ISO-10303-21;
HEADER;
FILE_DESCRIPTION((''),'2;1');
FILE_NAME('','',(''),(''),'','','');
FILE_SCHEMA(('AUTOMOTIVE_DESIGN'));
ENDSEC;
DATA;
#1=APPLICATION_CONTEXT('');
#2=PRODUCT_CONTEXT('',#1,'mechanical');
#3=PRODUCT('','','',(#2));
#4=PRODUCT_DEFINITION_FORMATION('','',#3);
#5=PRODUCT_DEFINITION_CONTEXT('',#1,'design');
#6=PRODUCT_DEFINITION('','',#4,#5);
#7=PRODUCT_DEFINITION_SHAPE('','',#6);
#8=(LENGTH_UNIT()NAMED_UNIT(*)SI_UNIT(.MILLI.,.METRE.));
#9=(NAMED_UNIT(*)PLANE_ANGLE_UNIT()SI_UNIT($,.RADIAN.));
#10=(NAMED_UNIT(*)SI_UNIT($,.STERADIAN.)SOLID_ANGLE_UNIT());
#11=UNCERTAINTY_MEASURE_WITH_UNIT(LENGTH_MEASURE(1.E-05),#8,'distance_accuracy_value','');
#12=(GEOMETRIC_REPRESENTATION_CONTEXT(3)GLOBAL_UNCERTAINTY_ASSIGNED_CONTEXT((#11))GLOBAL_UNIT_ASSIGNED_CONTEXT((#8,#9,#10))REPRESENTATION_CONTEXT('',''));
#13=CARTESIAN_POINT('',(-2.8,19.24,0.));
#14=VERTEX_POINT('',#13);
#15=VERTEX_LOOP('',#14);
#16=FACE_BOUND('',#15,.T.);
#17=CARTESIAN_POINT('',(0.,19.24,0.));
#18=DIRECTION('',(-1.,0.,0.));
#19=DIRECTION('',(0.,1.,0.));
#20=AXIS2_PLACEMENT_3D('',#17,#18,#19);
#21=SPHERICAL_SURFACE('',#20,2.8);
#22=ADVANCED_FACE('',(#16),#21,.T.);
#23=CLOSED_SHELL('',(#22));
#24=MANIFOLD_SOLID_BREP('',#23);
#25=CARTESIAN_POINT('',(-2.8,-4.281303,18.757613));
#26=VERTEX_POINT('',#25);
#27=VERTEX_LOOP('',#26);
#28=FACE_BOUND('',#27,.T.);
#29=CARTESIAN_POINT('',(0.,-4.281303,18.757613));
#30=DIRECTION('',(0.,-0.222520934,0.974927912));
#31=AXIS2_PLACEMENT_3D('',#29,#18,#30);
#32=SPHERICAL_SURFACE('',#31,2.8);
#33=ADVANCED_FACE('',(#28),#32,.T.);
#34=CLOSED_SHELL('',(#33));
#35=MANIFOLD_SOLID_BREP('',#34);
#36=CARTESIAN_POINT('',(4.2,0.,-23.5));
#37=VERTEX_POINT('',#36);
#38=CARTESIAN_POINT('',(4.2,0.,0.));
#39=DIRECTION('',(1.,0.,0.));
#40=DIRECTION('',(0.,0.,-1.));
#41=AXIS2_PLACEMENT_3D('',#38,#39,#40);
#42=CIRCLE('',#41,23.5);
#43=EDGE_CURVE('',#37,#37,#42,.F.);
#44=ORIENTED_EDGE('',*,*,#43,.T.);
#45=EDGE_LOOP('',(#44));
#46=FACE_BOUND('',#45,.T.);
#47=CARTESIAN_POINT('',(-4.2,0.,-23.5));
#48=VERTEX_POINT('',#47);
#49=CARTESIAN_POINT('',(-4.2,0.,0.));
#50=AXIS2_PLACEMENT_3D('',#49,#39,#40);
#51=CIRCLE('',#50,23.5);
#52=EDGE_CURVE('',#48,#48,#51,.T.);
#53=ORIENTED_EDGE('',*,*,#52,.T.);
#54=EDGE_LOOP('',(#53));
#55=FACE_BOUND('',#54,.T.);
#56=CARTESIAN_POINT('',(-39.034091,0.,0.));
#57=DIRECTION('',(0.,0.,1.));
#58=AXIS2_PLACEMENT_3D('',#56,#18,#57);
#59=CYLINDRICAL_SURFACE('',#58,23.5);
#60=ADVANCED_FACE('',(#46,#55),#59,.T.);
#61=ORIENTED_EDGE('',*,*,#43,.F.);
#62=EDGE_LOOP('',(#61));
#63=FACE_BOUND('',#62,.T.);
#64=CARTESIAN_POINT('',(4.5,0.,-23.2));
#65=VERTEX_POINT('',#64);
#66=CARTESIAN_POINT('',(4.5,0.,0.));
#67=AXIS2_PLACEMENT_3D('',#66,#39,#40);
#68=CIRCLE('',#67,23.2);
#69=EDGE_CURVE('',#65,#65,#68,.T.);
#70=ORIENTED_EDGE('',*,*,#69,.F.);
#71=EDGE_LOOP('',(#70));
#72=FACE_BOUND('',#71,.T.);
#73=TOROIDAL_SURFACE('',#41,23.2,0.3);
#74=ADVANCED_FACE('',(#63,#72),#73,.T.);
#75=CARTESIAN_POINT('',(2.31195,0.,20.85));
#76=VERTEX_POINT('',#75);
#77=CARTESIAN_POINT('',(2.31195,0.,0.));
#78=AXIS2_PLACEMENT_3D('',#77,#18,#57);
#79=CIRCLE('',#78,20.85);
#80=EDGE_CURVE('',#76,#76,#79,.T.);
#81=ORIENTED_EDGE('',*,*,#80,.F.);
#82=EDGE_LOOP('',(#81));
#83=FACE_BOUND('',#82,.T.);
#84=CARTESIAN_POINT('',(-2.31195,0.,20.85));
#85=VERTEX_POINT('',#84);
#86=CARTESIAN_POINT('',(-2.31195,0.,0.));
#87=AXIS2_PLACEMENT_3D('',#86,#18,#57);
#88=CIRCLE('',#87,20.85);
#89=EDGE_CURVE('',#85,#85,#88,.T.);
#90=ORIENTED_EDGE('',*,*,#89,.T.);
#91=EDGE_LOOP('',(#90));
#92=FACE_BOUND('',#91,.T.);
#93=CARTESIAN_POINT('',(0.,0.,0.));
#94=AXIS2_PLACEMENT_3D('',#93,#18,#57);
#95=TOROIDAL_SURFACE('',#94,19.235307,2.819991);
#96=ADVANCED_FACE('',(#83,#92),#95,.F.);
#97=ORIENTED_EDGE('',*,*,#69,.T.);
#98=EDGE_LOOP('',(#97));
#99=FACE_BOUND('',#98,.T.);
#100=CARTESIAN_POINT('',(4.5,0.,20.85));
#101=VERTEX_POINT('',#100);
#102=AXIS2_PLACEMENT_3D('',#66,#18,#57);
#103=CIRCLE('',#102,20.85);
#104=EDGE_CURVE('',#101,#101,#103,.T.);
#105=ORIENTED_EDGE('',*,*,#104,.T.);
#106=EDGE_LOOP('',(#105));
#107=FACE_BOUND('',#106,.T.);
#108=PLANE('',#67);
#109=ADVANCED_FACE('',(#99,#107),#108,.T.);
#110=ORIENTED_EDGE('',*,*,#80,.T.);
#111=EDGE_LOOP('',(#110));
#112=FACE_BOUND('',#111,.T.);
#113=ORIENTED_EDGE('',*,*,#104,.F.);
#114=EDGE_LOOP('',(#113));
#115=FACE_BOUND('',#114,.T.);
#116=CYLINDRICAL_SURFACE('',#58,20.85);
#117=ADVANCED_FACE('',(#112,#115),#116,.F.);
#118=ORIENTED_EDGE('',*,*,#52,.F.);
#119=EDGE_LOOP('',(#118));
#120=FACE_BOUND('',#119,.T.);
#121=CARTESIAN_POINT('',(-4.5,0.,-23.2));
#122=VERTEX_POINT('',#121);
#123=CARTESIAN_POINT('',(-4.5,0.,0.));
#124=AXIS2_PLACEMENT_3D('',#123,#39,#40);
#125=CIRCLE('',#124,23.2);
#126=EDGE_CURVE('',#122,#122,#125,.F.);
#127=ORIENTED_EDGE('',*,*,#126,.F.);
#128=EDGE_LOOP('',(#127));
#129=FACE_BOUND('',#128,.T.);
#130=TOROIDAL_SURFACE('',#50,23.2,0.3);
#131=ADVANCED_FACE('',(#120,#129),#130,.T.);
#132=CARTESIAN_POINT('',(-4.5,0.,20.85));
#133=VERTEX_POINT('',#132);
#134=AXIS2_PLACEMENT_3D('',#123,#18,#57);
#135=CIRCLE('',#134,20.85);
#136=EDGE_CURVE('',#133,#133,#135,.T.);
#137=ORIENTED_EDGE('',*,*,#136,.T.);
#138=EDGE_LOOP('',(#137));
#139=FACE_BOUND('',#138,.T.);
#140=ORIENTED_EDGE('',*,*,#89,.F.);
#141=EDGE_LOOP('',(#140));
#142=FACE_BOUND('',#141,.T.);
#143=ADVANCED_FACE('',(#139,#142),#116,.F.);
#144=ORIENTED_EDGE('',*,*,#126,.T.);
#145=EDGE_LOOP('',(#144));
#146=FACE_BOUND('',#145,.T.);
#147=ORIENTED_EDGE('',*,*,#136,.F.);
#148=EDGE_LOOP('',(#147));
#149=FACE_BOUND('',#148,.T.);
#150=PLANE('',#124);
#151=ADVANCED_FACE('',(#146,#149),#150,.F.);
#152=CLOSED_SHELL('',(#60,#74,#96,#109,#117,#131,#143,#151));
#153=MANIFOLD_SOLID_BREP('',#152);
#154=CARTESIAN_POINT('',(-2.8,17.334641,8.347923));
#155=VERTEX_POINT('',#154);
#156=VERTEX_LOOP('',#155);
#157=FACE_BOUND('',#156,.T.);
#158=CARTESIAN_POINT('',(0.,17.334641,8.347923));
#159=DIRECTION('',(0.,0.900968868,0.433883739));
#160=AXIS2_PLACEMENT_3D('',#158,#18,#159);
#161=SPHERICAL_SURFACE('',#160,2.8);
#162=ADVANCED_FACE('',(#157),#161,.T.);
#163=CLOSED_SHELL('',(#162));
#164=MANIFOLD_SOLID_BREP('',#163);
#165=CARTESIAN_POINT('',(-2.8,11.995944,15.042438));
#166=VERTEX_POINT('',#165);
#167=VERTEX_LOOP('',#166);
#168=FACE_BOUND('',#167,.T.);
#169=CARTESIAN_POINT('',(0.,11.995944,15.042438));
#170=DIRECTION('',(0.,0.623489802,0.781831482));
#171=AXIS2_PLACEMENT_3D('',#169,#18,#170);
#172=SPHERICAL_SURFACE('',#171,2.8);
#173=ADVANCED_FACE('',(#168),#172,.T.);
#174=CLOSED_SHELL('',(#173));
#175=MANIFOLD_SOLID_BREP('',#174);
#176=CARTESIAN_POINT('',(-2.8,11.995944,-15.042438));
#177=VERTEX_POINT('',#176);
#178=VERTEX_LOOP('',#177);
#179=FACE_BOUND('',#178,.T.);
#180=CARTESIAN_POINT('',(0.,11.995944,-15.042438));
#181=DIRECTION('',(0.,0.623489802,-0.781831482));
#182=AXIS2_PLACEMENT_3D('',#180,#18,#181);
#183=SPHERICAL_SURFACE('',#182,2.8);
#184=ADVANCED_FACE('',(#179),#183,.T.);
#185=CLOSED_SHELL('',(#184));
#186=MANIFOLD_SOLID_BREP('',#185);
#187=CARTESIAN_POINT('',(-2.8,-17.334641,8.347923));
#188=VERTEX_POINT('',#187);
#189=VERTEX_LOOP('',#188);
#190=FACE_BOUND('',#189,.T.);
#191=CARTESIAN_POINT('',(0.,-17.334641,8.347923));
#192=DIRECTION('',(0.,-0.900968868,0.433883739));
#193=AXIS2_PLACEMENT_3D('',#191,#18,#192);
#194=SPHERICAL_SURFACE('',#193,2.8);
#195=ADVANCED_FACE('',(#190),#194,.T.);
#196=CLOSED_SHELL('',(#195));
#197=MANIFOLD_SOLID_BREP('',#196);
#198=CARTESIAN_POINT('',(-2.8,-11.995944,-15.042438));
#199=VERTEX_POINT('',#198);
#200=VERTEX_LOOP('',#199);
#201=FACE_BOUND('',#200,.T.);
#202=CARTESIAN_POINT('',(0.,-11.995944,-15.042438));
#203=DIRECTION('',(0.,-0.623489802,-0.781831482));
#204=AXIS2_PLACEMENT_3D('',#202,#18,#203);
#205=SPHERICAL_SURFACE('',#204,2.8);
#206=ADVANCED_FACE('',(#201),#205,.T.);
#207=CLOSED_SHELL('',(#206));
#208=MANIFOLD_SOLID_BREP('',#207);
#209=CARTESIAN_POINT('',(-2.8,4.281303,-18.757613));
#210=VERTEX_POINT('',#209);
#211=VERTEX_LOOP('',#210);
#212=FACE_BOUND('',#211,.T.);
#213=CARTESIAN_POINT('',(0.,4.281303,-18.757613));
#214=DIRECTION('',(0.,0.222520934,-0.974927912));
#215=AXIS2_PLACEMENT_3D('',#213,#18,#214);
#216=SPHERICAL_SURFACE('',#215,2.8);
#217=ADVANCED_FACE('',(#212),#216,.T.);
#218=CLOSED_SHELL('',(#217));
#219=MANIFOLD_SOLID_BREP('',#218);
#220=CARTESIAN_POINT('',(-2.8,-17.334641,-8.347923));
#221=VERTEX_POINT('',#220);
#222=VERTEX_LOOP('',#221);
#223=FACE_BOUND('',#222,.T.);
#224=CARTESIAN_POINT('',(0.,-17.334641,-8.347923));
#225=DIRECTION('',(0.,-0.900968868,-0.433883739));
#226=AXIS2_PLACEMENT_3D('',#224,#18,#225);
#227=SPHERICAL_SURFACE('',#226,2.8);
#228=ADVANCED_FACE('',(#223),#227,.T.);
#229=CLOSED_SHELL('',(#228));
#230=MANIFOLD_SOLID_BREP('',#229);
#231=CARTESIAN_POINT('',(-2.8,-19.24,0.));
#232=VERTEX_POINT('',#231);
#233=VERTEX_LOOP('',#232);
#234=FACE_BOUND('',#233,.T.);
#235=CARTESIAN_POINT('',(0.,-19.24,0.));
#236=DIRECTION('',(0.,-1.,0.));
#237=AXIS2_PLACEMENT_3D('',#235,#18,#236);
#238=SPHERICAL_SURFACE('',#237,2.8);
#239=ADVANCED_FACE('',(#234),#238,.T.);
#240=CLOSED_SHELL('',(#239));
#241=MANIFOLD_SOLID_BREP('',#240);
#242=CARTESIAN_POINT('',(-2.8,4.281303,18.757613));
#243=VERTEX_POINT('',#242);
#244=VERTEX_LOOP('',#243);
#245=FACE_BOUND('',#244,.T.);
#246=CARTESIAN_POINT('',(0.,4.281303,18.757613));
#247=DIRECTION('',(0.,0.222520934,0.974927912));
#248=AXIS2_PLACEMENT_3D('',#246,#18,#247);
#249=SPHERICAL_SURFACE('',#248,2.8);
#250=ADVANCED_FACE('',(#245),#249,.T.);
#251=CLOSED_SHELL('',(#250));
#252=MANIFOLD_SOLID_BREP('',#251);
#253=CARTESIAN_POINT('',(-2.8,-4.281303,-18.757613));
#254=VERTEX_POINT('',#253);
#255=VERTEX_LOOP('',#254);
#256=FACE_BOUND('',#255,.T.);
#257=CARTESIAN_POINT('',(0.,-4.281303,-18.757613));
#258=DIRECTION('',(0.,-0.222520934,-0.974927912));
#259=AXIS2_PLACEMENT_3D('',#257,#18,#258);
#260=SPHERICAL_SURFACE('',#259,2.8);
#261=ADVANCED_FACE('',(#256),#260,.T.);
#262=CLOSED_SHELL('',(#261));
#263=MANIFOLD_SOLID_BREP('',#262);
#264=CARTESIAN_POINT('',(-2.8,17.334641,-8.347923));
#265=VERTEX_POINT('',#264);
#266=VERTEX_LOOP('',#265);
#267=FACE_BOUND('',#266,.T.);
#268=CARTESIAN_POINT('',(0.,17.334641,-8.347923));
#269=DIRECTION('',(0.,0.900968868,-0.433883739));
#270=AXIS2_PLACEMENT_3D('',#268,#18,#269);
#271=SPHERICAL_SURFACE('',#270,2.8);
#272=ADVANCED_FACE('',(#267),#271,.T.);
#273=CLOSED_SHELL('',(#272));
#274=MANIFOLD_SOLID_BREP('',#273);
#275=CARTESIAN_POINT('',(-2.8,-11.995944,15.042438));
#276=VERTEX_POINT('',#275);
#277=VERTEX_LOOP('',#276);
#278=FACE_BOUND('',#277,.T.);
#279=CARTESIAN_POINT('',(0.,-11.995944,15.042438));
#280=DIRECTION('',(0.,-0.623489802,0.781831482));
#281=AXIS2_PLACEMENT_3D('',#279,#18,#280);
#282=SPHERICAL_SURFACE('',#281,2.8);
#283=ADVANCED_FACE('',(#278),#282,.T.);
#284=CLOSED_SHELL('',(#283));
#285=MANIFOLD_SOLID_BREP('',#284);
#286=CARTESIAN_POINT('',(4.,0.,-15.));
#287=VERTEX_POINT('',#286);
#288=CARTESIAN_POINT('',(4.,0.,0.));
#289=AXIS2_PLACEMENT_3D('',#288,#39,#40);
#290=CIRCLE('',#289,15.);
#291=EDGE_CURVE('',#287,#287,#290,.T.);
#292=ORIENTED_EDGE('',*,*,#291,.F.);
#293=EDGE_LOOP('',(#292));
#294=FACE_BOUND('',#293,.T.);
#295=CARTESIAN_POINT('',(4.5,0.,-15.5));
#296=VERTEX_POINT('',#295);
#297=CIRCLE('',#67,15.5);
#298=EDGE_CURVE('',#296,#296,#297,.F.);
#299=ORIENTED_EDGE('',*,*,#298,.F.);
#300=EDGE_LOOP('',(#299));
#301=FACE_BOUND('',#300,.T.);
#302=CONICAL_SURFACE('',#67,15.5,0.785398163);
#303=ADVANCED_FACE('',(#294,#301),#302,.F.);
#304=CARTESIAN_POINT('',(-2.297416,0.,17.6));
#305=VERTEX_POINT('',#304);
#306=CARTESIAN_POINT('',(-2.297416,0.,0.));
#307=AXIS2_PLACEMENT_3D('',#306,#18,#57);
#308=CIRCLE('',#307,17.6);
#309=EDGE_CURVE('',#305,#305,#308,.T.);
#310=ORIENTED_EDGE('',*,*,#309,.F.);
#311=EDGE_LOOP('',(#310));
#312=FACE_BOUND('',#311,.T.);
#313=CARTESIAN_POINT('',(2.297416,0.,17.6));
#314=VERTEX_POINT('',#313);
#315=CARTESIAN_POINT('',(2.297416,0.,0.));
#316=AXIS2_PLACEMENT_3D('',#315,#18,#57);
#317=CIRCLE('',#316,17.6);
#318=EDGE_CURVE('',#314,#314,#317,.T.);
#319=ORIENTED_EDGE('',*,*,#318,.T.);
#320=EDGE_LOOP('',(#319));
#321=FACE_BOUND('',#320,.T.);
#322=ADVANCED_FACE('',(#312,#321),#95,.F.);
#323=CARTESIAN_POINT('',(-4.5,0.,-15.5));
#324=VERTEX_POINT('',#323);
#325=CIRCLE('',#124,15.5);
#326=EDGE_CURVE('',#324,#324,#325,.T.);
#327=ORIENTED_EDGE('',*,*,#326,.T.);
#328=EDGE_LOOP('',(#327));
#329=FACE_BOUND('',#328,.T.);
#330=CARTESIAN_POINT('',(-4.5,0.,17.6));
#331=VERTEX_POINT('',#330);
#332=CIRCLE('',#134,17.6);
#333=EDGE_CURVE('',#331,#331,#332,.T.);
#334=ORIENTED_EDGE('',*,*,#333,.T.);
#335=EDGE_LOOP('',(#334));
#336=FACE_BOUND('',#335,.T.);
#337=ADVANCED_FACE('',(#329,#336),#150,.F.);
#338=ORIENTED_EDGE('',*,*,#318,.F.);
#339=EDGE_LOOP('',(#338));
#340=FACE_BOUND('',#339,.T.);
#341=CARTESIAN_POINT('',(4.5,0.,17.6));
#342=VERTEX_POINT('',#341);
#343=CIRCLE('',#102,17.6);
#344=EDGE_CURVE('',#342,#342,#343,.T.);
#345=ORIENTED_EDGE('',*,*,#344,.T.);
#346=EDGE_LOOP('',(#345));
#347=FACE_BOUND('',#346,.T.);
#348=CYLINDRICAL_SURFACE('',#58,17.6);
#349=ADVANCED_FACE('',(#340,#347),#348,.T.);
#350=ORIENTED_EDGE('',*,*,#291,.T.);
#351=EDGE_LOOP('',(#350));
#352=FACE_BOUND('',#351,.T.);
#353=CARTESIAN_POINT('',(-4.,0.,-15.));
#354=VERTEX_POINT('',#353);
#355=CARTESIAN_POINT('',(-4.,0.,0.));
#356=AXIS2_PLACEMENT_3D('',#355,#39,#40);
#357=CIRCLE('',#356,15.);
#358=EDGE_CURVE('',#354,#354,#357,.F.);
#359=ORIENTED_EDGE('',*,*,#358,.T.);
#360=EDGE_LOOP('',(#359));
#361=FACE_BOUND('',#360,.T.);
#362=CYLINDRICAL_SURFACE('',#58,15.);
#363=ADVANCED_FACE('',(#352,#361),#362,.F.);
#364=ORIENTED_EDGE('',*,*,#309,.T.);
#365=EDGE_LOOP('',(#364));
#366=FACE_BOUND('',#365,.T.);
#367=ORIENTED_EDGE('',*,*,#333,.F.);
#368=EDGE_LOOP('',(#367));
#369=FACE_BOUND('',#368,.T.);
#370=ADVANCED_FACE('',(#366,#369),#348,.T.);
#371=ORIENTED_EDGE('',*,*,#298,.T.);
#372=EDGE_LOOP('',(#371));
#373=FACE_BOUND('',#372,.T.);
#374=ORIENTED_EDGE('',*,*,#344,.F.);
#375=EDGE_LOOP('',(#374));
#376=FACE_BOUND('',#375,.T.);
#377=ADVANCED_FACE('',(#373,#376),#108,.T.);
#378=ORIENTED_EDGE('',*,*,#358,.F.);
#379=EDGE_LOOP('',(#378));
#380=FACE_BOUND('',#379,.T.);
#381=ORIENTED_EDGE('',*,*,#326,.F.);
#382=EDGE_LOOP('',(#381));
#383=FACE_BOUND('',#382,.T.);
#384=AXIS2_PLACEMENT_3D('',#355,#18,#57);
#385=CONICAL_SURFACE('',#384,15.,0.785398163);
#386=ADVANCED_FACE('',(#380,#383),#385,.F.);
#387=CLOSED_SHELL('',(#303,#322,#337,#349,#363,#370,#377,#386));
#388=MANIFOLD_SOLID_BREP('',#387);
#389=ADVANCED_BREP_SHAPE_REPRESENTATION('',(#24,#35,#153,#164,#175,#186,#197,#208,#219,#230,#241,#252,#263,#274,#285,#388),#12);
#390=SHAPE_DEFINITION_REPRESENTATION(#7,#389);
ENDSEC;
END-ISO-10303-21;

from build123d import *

# Parameters (mm, degrees)
CIRPATTERN1_COUNT = 14
FILLET1_R         = 0.3
CHAMFER1_SIZE     = 0.5


with BuildPart() as part:
    # Sketch1 → Revolve1 (revolve)
    with BuildSketch(Plane.XY):
        with BuildLine():
            Line((4.5, 20.85), (4.5, 23.5))
            Line((4.5, 23.5), (-4.5, 23.5))
            Line((-4.5, 23.5), (-4.5, 20.85))
            Line((-4.5, 20.85), (-2.311950123, 20.85))
            ThreePointArc((-2.311950123, 20.85), (0, 22.055297441), (2.311950123, 20.85))
            Line((2.311950123, 20.85), (4.5, 20.85))
        make_face()
        with BuildLine():
            ThreePointArc((2.297415927, 17.6), (0, 16.415315922), (-2.297415927, 17.6))
            Line((-2.297415927, 17.6), (-4.5, 17.6))
            Line((-4.5, 17.6), (-4.5, 15))
            Line((-4.5, 15), (4.5, 15))
            Line((4.5, 15), (4.5, 17.6))
            Line((4.5, 17.6), (2.297415927, 17.6))
        make_face()
    revolve(axis=Axis((-39.034090909, 0, 0), (1, 0, 0)))

    # Fillet1
    fillet1_edges = [part.edges().sort_by_distance(p)[0] for p in [
        (4.5, -23.5, 0),
        (-4.5, -23.5, 0),
    ]]
    fillet(fillet1_edges, radius=FILLET1_R)

    # Chamfer1
    chamfer1_edges = [part.edges().sort_by_distance(p)[0] for p in [
        (4.5, -15, 0),
        (-4.5, -15, 0),
    ]]
    chamfer(chamfer1_edges, length=CHAMFER1_SIZE)


with BuildPart() as body_2:
    # Sketch2 → Revolve2 (revolve)
    with BuildSketch(Plane.XY):
        with BuildLine():
            ThreePointArc((2.8, 19.24), (0, 22.04), (-2.8, 19.24))
            Line((-2.8, 19.24), (2.8, 19.24))
        make_face()
    revolve(axis=Axis((-2.8, 19.24, 0), (1, 0, 0)))


with BuildPart() as cirpattern1_1:
    # CirPattern1: pattern copy
    add(body_2.part.rotate(Axis((4.5, 0, 0), (-1, 0, 0)), 1 * 360 / CIRPATTERN1_COUNT))


with BuildPart() as cirpattern1_2:
    # CirPattern1: pattern copy
    add(body_2.part.rotate(Axis((4.5, 0, 0), (-1, 0, 0)), 2 * 360 / CIRPATTERN1_COUNT))


with BuildPart() as cirpattern1_3:
    # CirPattern1: pattern copy
    add(body_2.part.rotate(Axis((4.5, 0, 0), (-1, 0, 0)), 3 * 360 / CIRPATTERN1_COUNT))


with BuildPart() as cirpattern1_4:
    # CirPattern1: pattern copy
    add(body_2.part.rotate(Axis((4.5, 0, 0), (-1, 0, 0)), 4 * 360 / CIRPATTERN1_COUNT))


with BuildPart() as cirpattern1_5:
    # CirPattern1: pattern copy
    add(body_2.part.rotate(Axis((4.5, 0, 0), (-1, 0, 0)), 5 * 360 / CIRPATTERN1_COUNT))


with BuildPart() as cirpattern1_6:
    # CirPattern1: pattern copy
    add(body_2.part.rotate(Axis((4.5, 0, 0), (-1, 0, 0)), 6 * 360 / CIRPATTERN1_COUNT))


with BuildPart() as cirpattern1_7:
    # CirPattern1: pattern copy
    add(body_2.part.rotate(Axis((4.5, 0, 0), (-1, 0, 0)), 7 * 360 / CIRPATTERN1_COUNT))


with BuildPart() as cirpattern1_8:
    # CirPattern1: pattern copy
    add(body_2.part.rotate(Axis((4.5, 0, 0), (-1, 0, 0)), 8 * 360 / CIRPATTERN1_COUNT))


with BuildPart() as cirpattern1_9:
    # CirPattern1: pattern copy
    add(body_2.part.rotate(Axis((4.5, 0, 0), (-1, 0, 0)), 9 * 360 / CIRPATTERN1_COUNT))


with BuildPart() as cirpattern1_10:
    # CirPattern1: pattern copy
    add(body_2.part.rotate(Axis((4.5, 0, 0), (-1, 0, 0)), 10 * 360 / CIRPATTERN1_COUNT))


with BuildPart() as cirpattern1_11:
    # CirPattern1: pattern copy
    add(body_2.part.rotate(Axis((4.5, 0, 0), (-1, 0, 0)), 11 * 360 / CIRPATTERN1_COUNT))


with BuildPart() as cirpattern1_12:
    # CirPattern1: pattern copy
    add(body_2.part.rotate(Axis((4.5, 0, 0), (-1, 0, 0)), 12 * 360 / CIRPATTERN1_COUNT))


with BuildPart() as cirpattern1_13:
    # CirPattern1: pattern copy
    add(body_2.part.rotate(Axis((4.5, 0, 0), (-1, 0, 0)), 13 * 360 / CIRPATTERN1_COUNT))


solid = Compound([part.part, body_2.part, cirpattern1_1.part, cirpattern1_2.part, cirpattern1_3.part, cirpattern1_4.part, cirpattern1_5.part, cirpattern1_6.part, cirpattern1_7.part, cirpattern1_8.part, cirpattern1_9.part, cirpattern1_10.part, cirpattern1_11.part, cirpattern1_12.part, cirpattern1_13.part])
